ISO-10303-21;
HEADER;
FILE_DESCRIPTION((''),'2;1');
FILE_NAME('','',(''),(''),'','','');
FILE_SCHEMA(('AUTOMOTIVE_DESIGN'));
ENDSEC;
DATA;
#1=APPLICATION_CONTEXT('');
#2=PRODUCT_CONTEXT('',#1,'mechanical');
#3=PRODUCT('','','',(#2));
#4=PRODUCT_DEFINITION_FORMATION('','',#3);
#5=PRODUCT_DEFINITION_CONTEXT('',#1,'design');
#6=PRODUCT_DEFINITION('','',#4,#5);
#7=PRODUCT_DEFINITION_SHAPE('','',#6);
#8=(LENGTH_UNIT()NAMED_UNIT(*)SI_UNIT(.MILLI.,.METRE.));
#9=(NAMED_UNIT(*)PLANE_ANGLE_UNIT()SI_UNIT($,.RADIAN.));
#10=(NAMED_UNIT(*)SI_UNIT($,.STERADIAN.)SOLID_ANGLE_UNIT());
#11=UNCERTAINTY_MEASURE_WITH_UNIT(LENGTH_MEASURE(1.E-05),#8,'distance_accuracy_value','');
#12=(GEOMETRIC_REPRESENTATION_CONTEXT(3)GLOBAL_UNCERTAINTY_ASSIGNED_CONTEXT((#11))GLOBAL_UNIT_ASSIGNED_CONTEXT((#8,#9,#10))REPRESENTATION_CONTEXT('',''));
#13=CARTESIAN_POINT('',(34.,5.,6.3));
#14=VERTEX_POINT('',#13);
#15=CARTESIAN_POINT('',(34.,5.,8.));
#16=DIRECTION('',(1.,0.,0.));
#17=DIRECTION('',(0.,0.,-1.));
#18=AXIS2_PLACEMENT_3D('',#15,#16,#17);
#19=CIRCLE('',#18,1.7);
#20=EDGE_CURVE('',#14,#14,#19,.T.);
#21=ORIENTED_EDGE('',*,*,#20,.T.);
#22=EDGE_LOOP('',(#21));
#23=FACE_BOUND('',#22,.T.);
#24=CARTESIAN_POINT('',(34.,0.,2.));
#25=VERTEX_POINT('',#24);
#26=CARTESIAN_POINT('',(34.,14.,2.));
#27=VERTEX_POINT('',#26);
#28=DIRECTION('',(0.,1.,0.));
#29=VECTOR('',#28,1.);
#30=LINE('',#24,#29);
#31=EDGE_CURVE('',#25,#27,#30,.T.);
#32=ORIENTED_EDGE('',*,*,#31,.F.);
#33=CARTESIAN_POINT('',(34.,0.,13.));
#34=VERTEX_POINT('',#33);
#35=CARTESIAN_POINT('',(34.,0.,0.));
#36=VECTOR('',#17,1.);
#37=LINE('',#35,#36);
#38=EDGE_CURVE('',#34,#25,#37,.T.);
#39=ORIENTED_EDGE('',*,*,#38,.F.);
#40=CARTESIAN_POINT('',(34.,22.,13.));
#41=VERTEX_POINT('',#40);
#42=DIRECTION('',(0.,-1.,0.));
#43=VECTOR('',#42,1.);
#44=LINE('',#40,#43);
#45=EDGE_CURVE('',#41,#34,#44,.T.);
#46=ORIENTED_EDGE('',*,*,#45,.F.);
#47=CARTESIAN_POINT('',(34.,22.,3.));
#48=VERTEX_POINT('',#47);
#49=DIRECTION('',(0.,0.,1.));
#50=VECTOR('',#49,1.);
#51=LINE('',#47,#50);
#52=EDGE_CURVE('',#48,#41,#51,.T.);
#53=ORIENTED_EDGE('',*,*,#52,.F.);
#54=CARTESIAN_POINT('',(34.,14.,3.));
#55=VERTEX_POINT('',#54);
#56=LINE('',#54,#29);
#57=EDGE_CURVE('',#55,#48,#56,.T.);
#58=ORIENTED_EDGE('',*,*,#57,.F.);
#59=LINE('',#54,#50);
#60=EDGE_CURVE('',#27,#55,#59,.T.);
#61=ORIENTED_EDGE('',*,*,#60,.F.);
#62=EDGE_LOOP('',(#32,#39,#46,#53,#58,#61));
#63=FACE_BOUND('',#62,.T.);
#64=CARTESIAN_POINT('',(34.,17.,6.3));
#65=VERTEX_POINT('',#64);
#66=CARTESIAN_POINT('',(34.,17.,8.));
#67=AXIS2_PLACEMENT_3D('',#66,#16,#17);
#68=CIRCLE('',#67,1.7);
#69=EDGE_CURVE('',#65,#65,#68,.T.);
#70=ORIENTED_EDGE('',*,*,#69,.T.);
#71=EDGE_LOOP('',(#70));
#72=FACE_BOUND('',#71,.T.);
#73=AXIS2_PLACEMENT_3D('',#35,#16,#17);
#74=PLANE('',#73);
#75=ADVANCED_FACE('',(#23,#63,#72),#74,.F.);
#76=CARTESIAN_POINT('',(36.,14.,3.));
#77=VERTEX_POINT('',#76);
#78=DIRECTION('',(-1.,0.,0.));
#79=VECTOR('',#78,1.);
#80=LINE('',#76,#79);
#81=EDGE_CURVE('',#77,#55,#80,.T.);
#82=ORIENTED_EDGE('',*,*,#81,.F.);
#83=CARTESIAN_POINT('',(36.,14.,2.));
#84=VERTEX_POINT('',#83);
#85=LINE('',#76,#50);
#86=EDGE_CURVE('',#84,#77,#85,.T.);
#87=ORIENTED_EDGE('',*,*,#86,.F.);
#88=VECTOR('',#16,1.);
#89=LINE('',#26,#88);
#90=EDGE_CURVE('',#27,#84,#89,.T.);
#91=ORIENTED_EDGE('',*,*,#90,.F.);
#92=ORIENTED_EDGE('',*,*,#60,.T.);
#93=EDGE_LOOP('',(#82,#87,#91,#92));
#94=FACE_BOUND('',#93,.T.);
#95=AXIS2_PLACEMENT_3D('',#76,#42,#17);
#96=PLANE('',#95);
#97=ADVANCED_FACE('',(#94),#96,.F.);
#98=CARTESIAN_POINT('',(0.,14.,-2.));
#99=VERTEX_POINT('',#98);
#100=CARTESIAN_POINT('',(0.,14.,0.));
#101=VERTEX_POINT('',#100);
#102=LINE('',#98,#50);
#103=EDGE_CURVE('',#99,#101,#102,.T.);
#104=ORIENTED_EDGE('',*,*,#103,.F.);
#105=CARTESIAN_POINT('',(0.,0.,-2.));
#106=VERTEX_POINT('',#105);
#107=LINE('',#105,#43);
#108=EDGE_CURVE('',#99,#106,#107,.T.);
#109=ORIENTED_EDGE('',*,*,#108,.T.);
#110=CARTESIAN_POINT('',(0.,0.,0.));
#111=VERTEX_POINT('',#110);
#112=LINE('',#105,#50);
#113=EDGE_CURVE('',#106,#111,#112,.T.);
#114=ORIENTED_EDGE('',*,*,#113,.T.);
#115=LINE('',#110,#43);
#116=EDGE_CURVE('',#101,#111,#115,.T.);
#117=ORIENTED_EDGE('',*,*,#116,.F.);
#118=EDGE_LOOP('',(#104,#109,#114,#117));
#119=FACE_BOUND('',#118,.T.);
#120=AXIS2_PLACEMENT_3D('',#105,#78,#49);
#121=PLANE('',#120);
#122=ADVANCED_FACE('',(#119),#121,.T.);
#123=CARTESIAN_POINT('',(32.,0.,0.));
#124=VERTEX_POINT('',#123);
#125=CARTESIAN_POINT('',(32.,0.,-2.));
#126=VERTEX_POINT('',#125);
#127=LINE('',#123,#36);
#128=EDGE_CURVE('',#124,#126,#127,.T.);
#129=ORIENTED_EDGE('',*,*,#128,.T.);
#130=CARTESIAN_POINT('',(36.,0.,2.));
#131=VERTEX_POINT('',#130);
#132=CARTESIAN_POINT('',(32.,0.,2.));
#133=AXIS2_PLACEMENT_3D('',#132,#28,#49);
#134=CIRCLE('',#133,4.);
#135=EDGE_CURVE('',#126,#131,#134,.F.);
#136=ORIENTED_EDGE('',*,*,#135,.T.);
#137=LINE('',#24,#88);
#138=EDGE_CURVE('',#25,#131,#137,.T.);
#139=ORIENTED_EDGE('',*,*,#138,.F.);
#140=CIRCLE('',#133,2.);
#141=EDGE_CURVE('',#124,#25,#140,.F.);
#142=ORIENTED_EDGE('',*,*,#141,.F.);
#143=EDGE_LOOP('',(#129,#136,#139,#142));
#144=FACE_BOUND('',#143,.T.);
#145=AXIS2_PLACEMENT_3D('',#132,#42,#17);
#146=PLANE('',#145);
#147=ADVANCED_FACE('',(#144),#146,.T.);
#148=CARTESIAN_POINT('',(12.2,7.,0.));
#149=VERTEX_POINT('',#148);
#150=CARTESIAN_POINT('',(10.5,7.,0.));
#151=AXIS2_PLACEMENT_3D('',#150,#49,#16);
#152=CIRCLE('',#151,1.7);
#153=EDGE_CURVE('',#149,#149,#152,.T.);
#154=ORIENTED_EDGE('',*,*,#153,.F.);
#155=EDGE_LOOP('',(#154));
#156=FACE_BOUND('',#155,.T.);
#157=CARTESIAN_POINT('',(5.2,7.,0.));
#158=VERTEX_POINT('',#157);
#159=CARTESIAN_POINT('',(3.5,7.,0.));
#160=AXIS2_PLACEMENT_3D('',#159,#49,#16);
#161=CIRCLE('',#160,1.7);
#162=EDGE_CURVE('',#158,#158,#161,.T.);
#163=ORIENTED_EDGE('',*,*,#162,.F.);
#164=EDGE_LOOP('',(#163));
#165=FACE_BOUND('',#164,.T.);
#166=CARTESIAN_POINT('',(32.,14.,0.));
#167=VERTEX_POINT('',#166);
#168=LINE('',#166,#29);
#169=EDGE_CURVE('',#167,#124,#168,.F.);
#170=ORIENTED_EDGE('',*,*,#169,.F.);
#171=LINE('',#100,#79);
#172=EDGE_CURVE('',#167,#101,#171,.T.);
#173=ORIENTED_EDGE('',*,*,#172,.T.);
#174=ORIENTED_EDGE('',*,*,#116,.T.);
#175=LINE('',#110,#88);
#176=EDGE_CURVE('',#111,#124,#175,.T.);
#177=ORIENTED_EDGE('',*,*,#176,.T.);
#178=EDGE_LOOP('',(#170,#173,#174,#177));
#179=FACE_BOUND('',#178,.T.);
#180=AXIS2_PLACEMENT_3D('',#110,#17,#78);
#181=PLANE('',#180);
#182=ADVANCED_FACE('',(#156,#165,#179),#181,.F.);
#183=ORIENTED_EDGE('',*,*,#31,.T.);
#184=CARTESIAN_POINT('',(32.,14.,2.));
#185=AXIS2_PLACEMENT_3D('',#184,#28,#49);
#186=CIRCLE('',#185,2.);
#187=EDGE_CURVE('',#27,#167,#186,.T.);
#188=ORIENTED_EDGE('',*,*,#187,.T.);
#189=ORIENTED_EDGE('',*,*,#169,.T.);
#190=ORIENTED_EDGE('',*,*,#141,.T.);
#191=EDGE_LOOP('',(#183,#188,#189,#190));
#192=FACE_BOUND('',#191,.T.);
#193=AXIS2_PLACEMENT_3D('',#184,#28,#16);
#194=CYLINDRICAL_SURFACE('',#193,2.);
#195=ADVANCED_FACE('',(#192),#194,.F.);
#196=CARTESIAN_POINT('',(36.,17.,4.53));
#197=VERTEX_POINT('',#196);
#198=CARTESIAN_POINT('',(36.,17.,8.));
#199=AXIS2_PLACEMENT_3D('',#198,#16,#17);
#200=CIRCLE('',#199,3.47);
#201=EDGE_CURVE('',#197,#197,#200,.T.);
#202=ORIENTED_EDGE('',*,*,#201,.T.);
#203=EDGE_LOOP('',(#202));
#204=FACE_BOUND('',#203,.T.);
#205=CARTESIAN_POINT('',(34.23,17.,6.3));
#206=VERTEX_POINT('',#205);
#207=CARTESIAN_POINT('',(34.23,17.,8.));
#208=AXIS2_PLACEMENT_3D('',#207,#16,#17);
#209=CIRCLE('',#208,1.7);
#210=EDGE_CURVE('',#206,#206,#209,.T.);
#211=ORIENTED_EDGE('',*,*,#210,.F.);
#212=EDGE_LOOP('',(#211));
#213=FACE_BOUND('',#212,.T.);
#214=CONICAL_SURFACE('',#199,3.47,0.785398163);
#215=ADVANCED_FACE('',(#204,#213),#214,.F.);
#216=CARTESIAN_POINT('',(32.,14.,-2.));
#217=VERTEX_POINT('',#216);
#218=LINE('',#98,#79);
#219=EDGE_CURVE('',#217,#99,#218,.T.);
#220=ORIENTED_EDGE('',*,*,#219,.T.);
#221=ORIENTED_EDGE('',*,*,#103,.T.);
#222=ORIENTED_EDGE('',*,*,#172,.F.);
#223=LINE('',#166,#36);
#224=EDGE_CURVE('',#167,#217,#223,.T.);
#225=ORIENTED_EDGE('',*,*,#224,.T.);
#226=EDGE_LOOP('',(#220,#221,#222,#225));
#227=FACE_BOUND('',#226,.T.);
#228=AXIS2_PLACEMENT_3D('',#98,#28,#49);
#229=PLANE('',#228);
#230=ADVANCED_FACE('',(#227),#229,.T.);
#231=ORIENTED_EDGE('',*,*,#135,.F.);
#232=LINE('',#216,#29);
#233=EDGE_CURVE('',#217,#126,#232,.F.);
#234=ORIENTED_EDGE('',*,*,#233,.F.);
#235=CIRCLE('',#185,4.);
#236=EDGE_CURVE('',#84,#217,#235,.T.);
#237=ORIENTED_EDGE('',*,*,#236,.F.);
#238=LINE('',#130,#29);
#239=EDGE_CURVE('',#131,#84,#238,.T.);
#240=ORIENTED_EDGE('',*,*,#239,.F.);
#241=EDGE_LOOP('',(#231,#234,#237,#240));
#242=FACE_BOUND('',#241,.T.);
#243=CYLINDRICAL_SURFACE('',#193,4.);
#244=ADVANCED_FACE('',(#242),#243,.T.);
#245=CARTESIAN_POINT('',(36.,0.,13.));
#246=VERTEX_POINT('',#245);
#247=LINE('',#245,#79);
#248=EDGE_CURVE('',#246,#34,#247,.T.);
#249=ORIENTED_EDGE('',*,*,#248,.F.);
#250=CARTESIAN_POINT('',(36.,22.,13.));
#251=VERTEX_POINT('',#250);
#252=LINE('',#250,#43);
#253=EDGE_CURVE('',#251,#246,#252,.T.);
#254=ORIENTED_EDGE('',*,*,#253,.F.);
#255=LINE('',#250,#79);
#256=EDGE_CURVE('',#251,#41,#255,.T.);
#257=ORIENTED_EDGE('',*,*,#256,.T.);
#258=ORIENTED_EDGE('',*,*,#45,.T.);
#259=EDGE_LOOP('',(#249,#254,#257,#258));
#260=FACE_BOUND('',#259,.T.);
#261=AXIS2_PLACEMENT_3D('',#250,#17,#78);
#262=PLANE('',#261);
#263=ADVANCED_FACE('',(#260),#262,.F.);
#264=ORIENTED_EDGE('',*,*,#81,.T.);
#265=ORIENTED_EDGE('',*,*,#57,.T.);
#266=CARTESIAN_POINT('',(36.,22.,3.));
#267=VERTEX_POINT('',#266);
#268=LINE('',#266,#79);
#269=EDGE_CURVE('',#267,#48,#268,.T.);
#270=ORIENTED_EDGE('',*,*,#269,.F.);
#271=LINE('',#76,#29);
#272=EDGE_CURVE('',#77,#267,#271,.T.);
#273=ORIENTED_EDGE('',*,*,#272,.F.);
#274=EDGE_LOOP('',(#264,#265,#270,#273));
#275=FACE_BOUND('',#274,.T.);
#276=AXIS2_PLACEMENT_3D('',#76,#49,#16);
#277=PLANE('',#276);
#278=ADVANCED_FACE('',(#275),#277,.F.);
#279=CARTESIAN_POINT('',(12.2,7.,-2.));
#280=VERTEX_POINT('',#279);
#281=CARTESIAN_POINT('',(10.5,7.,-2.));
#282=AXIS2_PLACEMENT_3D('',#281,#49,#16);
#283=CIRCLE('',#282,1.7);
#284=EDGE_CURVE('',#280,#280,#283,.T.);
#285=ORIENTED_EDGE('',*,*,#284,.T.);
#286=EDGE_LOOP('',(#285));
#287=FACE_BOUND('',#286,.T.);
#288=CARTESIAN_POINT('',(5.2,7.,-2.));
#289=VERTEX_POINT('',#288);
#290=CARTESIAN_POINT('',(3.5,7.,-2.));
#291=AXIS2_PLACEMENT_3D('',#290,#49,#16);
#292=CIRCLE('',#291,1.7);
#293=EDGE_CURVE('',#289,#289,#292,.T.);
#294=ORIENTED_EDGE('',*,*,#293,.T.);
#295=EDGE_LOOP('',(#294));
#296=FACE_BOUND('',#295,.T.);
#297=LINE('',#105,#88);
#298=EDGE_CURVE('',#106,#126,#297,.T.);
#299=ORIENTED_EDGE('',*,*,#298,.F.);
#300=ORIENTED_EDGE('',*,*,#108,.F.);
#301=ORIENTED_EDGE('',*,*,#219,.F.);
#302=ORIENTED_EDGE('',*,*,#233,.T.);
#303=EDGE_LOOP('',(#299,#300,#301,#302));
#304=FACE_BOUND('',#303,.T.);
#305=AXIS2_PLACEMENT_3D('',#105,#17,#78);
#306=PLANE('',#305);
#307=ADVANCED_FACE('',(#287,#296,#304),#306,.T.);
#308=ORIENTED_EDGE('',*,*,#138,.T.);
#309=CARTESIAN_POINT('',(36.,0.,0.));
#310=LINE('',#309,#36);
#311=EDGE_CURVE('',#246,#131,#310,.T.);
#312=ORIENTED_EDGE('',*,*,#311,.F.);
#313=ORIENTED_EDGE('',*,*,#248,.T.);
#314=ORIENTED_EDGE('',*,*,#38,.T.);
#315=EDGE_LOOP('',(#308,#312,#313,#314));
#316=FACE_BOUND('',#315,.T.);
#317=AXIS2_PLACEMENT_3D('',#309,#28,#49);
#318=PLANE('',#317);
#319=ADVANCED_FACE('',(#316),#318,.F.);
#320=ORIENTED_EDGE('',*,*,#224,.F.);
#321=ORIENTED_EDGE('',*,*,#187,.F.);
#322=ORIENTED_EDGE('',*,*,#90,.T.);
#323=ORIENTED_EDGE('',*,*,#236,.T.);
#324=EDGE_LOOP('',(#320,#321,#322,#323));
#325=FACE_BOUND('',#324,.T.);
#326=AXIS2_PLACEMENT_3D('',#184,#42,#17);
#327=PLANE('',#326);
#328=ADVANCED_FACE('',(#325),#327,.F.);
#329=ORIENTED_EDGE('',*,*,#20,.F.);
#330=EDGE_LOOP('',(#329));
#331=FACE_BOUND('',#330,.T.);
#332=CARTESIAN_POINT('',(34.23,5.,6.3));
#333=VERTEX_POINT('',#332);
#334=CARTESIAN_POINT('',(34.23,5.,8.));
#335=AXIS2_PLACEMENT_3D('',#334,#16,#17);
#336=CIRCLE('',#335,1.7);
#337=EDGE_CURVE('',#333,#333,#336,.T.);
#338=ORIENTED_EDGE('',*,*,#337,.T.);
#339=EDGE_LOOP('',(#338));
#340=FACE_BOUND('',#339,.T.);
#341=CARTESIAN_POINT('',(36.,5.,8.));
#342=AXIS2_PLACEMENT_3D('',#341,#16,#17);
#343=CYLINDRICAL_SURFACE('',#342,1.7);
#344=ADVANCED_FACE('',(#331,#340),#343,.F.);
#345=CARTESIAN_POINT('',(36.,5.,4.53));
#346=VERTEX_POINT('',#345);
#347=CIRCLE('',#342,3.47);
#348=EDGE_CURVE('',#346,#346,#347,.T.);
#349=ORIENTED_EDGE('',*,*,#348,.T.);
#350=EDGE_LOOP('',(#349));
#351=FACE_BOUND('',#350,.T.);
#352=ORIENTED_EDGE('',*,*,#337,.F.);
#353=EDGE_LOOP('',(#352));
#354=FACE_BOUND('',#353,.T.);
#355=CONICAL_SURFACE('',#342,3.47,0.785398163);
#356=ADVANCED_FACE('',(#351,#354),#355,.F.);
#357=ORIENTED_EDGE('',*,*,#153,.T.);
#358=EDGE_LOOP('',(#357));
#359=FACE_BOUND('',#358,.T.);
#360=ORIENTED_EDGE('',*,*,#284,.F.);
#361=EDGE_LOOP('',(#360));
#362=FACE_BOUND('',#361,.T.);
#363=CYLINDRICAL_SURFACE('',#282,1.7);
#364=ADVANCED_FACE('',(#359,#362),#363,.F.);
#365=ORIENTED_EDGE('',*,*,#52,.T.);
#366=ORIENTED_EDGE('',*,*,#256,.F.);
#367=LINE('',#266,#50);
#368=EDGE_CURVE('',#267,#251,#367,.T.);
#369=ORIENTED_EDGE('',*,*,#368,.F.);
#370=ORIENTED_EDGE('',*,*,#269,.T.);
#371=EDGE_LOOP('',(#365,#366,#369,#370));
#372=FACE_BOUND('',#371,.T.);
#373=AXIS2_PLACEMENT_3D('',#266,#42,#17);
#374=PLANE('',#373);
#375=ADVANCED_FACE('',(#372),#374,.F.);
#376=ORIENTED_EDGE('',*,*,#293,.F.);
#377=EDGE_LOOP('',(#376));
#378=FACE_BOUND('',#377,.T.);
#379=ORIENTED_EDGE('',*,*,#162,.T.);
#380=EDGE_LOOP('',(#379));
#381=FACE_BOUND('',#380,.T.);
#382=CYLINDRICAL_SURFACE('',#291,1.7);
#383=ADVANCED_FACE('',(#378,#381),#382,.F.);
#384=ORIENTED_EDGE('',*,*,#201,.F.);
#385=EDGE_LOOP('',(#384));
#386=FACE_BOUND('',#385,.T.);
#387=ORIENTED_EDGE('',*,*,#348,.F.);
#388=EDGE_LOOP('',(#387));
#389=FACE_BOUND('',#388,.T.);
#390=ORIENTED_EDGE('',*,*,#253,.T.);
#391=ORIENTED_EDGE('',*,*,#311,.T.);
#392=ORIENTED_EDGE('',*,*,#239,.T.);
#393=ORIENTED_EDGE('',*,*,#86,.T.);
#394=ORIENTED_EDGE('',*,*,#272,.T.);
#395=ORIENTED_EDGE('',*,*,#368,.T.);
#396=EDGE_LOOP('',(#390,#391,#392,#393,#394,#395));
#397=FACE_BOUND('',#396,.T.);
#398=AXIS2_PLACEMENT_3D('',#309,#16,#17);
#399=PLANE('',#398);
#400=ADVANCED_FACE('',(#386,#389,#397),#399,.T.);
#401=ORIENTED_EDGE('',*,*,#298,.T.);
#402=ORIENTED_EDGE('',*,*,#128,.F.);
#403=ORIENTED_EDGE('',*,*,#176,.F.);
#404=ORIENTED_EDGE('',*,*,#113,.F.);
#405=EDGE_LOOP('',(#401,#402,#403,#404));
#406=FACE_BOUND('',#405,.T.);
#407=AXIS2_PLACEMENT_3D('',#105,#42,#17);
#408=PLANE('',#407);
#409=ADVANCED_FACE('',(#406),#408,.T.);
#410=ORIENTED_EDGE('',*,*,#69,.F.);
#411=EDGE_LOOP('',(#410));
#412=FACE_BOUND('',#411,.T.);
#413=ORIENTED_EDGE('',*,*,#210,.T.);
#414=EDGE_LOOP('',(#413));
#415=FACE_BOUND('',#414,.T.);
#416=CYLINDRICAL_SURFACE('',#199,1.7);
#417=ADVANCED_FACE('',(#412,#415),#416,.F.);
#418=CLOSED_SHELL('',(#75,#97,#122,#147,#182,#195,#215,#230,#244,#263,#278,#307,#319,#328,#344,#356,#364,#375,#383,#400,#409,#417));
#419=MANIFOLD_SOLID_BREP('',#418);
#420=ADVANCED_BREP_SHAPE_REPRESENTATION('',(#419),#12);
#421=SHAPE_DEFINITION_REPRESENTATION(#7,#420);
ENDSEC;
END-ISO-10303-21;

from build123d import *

# Parameters (mm, degrees)
SKIZZE1_W                                            = 34
SKIZZE1_H                                            = 14
BASIS_BLECH1_DEPTH                                   = 2
KANTE_LASCHE1_STRIP_W                                = 12
KANTE_LASCHE1_STRIP_H                                = 2
KANTE_LASCHE1_STRIP_CUT_DEPTH                        = 14
KANTE_LASCHE1_DEPTH                                  = 14
KANTE_LASCHE1_START                                  = 2
KANTE_LASCHE1_FLAT_DEPTH                             = 2
SKIZZE10_R                                           = 1.7
SCHNITT_LINEAR_AUSTRAGEN1_DEPTH                      = 45.147480109
FORMSENKUNG_F_R_M3_SENKSCHRAUBE_MIT_INNE_D           = 3.4
FORMSENKUNG_F_R_M3_SENKSCHRAUBE_MIT_INNE_CSINK_D     = 6.94
FORMSENKUNG_F_R_M3_SENKSCHRAUBE_MIT_INNE_CSINK_ANGLE = 90


# Sheet-metal steps are written as plain solids
with BuildPart() as part:
    # Skizze1 → Basis-Blech1 (new body)
    with BuildSketch(Plane.XY):
        with Locations((17, 7)):
            Rectangle(SKIZZE1_W, SKIZZE1_H)
    extrude(amount=-BASIS_BLECH1_DEPTH)

    # Kante-Lasche1 strip (across the edge) → Kante-Lasche1 strip cut (cut)
    with BuildSketch(Plane(origin=(34, 0, 0), x_dir=(-1, 0, 0), z_dir=(0, 1, 0))):
        with Locations((-4, -1)):
            Rectangle(KANTE_LASCHE1_STRIP_W, KANTE_LASCHE1_STRIP_H)
    extrude(amount=KANTE_LASCHE1_STRIP_CUT_DEPTH, mode=Mode.SUBTRACT)

    # Kante-Lasche1 bend section (across the edge) → Kante-Lasche1 (add)
    with BuildSketch(Plane(origin=(34, 0, 0), x_dir=(-1, 0, 0), z_dir=(0, 1, 0))):
        with BuildLine():
            Line((-2, 2), (0, 2))
            ThreePointArc((0, 2), (0.585786438, 0.585786438), (2, 0))
            Line((2, 0), (2, -2))
            ThreePointArc((2, -2), (-0.828427125, -0.828427125), (-2, 2))
        make_face()
    extrude(amount=KANTE_LASCHE1_DEPTH)

    # Kante-Lasche1 profile (on flange) → Kante-Lasche1 flat (add)
    with BuildSketch(Plane.YZ.offset(34).offset(KANTE_LASCHE1_START)):
        Polygon((0, 13), (0, 2), (14, 2), (14, 3), (22, 3), (22, 13), align=None)
    extrude(amount=-KANTE_LASCHE1_FLAT_DEPTH)

    # Skizze10 → Schnitt-Linear austragen1 (cut, through all)
    with BuildSketch(Plane.XY):
        with Locations((3.5, 7)):
            Circle(SKIZZE10_R)
        with Locations((10.5, 7)):
            Circle(SKIZZE10_R)
    extrude(amount=-SCHNITT_LINEAR_AUSTRAGEN1_DEPTH, mode=Mode.SUBTRACT)

    # Formsenkung für M3 Senkschraube mit Innensechskant1 (through all)
    with Locations(Plane(origin=(36, 0, 0), x_dir=(0, 0, -1), z_dir=(1, 0, 0))):
        with Locations((-8, 5), (-8, 17)):
            CounterSinkHole(FORMSENKUNG_F_R_M3_SENKSCHRAUBE_MIT_INNE_D / 2, FORMSENKUNG_F_R_M3_SENKSCHRAUBE_MIT_INNE_CSINK_D / 2, counter_sink_angle=FORMSENKUNG_F_R_M3_SENKSCHRAUBE_MIT_INNE_CSINK_ANGLE)


solid = part.part
